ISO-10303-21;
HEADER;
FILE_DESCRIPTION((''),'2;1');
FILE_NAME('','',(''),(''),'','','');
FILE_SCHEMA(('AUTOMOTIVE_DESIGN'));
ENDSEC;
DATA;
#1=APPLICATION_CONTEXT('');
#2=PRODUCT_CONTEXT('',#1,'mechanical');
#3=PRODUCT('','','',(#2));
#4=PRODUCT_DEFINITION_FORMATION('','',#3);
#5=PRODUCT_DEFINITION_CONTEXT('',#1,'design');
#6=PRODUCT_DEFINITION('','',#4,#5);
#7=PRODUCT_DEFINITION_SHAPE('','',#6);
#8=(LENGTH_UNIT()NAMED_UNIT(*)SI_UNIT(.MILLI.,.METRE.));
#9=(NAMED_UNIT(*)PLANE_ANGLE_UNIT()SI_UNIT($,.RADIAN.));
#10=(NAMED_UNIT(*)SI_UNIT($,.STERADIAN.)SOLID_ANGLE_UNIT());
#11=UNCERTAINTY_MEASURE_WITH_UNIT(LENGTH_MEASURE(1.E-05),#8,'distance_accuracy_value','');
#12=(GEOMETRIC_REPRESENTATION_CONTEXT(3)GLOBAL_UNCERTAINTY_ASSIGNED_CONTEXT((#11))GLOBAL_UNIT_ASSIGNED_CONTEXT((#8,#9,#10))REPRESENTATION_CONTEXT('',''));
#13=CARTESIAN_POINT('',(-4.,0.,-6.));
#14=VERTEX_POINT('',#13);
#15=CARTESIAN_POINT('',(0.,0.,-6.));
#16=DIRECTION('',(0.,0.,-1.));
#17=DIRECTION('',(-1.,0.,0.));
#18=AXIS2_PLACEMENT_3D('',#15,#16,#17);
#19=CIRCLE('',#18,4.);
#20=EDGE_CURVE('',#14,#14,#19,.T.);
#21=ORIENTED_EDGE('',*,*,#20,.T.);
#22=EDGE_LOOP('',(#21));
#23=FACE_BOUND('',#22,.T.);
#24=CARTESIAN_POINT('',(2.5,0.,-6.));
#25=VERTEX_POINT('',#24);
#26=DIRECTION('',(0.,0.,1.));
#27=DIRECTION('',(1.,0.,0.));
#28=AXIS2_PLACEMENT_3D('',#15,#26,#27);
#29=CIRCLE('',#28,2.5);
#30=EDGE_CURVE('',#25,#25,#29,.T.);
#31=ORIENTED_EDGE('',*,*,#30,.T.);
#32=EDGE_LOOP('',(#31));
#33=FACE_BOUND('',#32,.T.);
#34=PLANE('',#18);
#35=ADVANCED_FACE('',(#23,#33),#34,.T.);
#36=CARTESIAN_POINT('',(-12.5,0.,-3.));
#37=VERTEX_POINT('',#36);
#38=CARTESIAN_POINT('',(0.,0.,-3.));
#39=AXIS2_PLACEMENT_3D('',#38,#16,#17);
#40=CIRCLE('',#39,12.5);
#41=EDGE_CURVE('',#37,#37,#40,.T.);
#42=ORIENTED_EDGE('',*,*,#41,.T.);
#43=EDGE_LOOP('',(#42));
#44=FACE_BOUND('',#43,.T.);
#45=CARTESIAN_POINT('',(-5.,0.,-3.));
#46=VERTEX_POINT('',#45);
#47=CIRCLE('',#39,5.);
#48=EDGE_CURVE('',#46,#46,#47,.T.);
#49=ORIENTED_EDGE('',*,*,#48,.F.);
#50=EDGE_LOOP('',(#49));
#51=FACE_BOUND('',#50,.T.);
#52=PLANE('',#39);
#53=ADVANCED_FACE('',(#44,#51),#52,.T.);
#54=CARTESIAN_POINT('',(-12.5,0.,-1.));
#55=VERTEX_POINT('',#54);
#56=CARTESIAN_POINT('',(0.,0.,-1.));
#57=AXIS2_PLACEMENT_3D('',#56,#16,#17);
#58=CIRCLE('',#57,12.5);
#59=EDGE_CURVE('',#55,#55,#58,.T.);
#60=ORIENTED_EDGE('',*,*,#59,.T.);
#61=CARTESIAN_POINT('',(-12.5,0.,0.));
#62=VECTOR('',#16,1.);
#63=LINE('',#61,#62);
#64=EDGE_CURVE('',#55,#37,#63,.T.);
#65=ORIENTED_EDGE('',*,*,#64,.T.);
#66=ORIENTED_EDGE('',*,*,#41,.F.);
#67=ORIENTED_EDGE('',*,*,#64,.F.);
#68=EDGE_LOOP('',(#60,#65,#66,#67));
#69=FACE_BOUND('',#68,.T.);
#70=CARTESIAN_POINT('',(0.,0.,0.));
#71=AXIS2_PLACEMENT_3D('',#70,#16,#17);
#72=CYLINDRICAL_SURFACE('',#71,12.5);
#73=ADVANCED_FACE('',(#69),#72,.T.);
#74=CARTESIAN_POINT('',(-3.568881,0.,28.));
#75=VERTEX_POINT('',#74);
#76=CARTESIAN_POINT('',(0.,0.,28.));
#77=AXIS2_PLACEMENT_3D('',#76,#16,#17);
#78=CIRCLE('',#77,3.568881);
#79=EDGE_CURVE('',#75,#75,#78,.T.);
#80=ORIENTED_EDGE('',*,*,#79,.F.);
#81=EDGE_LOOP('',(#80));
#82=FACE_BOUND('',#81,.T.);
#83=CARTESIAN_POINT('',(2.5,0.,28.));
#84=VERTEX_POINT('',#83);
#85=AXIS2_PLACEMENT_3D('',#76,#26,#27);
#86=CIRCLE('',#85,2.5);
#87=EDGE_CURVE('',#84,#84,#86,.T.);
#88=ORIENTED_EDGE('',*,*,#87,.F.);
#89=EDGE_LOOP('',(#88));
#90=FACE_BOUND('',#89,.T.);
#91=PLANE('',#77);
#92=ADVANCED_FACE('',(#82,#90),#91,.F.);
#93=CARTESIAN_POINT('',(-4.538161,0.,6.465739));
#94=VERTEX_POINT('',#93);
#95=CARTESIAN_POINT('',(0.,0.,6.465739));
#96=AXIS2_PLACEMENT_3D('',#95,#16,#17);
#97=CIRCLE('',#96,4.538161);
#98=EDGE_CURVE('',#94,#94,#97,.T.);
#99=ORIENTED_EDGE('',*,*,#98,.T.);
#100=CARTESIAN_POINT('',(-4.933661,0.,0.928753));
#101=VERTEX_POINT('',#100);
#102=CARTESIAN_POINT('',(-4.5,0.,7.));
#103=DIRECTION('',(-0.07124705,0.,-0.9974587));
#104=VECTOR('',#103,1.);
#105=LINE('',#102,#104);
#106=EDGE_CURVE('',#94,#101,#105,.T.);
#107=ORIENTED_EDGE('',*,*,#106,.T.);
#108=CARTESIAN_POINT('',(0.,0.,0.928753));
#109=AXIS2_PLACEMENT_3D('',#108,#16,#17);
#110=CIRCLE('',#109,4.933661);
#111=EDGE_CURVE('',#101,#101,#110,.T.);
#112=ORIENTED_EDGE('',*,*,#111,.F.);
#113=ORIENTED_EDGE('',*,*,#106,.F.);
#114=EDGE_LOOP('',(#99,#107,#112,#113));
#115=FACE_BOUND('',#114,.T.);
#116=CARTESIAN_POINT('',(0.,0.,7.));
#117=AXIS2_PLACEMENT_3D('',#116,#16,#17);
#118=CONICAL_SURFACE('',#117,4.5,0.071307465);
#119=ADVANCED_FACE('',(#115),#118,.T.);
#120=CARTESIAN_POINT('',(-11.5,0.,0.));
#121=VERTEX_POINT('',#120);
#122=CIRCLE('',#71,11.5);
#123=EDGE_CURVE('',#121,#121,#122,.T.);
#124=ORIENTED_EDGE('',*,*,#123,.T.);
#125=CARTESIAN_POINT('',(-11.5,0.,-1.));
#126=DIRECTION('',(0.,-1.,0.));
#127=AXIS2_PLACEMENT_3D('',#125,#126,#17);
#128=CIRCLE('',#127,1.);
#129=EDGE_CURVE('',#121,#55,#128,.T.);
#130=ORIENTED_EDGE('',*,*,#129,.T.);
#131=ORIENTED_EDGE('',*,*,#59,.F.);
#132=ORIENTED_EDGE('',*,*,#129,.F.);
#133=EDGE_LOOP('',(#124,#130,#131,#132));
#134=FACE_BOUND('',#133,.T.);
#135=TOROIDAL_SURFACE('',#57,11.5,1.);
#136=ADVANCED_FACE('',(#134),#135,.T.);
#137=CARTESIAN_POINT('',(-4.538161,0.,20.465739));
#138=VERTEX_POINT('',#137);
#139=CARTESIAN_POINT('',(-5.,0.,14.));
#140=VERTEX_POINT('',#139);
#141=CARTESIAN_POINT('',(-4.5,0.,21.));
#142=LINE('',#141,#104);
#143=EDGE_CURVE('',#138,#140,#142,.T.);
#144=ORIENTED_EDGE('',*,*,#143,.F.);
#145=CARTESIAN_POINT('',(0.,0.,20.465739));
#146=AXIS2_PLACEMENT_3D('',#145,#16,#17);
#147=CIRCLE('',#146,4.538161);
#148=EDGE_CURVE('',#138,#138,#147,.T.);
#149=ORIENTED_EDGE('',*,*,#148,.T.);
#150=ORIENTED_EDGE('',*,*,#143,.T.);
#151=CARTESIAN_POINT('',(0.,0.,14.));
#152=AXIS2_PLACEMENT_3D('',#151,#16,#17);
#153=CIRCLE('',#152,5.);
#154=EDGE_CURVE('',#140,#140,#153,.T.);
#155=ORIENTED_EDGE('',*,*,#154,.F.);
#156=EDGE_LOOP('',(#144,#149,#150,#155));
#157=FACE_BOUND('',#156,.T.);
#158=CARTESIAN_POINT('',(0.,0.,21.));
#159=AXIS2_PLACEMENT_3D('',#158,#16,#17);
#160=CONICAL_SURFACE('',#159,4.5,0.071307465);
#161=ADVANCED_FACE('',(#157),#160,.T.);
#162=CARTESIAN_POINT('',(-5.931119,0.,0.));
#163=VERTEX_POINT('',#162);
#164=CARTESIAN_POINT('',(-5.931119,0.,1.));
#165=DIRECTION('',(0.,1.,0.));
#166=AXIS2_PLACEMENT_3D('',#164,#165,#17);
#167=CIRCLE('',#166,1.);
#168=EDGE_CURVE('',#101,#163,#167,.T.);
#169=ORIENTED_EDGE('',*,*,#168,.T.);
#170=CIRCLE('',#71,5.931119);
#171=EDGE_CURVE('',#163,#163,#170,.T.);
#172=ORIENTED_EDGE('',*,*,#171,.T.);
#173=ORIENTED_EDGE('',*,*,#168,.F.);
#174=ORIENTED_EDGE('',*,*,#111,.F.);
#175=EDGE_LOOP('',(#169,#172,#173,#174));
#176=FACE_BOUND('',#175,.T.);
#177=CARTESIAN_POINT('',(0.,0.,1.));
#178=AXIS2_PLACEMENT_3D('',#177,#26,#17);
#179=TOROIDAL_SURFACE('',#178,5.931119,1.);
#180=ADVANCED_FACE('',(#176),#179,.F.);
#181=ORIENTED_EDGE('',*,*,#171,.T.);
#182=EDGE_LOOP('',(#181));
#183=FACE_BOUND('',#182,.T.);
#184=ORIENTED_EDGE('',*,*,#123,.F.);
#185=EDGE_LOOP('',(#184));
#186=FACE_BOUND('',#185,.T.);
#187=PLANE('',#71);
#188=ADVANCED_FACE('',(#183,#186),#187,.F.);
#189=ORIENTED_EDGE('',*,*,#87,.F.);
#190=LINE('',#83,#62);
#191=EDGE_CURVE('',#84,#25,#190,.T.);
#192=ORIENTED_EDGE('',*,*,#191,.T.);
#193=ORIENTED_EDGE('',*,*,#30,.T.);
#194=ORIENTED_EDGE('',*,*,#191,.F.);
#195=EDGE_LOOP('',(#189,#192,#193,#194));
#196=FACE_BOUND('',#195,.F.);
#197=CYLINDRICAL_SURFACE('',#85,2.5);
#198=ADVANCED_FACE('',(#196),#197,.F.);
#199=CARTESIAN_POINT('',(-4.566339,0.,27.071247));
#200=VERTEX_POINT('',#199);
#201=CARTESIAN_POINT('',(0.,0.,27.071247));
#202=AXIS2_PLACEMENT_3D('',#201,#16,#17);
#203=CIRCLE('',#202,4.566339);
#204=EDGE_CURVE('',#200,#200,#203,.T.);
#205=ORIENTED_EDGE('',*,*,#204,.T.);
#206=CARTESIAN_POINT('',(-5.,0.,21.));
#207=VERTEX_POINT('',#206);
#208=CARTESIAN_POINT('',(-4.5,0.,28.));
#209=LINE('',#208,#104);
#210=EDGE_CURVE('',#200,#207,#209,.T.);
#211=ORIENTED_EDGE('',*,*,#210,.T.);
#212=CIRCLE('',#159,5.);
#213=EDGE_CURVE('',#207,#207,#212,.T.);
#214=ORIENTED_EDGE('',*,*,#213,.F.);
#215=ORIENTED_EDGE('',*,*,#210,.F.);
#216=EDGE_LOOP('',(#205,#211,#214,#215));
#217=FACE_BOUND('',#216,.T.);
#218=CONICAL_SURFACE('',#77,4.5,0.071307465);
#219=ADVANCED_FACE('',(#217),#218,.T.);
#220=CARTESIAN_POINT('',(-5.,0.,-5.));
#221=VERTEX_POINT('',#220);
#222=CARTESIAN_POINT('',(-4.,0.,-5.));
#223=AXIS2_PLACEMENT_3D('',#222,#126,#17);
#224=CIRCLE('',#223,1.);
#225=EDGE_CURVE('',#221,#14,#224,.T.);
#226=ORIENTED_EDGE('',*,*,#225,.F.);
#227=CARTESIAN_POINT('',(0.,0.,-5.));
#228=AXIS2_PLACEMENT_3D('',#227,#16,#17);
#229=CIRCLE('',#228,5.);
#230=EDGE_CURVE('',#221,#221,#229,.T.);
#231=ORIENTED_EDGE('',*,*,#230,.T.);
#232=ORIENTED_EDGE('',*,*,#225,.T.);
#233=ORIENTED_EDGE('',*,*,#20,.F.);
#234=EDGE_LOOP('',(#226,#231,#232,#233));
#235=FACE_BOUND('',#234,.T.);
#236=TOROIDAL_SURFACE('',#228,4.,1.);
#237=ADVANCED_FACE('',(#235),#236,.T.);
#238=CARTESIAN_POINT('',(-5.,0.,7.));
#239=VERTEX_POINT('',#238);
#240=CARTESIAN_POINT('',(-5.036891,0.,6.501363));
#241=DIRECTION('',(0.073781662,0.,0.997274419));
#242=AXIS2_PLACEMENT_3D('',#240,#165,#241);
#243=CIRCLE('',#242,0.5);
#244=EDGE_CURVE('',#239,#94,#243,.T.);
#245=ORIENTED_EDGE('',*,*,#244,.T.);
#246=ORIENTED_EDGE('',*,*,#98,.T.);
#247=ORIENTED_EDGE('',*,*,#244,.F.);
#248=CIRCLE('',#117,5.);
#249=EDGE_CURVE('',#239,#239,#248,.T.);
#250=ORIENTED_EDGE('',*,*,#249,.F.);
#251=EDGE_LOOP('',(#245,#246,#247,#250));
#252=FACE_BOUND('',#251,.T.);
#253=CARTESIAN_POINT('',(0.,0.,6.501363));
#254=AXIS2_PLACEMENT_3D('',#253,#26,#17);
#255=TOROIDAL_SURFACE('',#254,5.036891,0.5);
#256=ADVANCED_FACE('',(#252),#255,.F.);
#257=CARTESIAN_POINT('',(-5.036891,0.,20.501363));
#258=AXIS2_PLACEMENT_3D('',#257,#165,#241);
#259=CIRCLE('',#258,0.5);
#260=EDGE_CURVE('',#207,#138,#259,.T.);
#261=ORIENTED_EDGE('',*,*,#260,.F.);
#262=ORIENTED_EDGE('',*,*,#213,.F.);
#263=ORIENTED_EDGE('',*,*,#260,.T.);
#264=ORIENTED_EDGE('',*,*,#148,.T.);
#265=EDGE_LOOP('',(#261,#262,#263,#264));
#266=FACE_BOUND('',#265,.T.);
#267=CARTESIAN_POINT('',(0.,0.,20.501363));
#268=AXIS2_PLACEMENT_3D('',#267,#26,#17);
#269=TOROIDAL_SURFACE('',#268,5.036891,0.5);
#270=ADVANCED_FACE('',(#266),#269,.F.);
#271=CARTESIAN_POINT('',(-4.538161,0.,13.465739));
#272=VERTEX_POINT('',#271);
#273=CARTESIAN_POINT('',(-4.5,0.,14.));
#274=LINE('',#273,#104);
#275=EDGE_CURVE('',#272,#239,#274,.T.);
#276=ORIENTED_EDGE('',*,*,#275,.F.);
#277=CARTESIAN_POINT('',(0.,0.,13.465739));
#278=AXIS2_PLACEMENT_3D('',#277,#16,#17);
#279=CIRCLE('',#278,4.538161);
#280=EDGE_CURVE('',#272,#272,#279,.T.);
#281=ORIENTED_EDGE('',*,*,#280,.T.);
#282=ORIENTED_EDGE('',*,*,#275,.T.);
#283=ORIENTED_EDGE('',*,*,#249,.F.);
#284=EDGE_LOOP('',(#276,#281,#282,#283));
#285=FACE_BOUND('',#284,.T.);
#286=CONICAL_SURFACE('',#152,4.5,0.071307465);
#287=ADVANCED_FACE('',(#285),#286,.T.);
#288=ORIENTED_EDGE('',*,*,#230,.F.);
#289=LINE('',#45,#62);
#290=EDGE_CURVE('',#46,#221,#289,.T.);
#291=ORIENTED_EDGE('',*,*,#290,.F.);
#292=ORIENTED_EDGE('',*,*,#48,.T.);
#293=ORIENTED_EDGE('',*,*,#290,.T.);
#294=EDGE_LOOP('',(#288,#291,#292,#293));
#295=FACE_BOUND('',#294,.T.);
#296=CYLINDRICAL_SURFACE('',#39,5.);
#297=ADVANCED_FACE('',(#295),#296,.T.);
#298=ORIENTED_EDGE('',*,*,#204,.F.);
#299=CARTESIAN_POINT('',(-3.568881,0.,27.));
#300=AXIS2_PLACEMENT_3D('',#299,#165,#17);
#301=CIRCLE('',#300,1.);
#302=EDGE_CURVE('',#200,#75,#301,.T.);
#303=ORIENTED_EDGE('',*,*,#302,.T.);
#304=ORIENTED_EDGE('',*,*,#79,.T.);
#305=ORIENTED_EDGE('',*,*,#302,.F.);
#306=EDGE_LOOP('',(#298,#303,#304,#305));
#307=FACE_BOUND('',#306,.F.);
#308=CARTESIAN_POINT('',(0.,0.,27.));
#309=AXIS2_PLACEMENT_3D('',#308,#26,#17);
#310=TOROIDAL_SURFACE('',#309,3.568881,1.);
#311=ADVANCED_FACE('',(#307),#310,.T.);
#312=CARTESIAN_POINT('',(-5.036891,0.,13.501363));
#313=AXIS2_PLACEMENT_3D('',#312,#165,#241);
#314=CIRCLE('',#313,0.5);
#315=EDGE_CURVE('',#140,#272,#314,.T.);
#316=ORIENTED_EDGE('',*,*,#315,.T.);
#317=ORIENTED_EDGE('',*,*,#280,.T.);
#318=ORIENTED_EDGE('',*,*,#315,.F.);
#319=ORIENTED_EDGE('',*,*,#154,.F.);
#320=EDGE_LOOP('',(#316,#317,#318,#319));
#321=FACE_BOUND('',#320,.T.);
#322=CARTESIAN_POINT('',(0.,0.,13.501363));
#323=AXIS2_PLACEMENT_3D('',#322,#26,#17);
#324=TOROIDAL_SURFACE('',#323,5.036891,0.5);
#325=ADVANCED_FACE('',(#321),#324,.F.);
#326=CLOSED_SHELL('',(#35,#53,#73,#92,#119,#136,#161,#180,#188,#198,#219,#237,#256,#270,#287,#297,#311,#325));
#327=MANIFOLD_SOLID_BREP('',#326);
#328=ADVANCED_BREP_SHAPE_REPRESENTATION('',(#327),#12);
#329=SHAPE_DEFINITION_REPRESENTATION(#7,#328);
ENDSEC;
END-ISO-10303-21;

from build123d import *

# Parameters (mm, degrees)
F2_R     = 2.5
F3_DEPTH = 34
F5_R     = 1


# Not quite as in the source:
# - a fillet or chamfer that OpenCascade refuses, or shapes differently, is made with other operations: its cross-section is extruded or revolved along the edge and cut away or added


with BuildPart() as f1:
    # F0 (on Front) → F1 (revolve)
    with BuildSketch(Plane.XZ):
        Polygon((0, 28), (-4.5, 28), (-5, 21), (-4.5, 21), (-5, 14), (-4.5, 14), (-5, 7), (-4.5, 7), (-5, 0), (-12.5, 0), (-12.5, -3), (-5, -3), (-5, -6), (0, -6), align=None)
    revolve(axis=Axis((0, 0, 11), (0, 0, -1)))

    # F2 (on face) → F3 (cut, through all)
    with BuildSketch(Plane.XY.offset(28)):
        Circle(F2_R)
    extrude(amount=-F3_DEPTH, mode=Mode.SUBTRACT)

    # F4: fillet of radius 0.5 on 3 edges, made by hand

    # F4_s1 → F4_t2 (revolve)
    with BuildSketch(Plane.XZ):
        with BuildLine():
            ThreePointArc((-5, 21), (-4.6586305005, 20.8283476869), (-4.538161481, 20.4657392656))
            Line((-4.538161481, 20.4657392656), (-4.528186894, 20.4650267951))
            Line((-4.528186894, 20.4650267951), (-4.490025413, 20.9992875295))
            Line((-4.490025413, 20.9992875295), (-4.5, 21.01))
            ThreePointArc((-4.5, 21.01), (-4.75, 21.01), (-4.9992621834, 21.0099727442))
            Line((-4.9992621834, 21.0099727442), (-5, 21))
        make_face()
    revolve(axis=Axis((0, 0, 21), (0, 0, -1)))

    # F4_s3 → F4_t4 (revolve)
    with BuildSketch(Plane.XZ):
        with BuildLine():
            ThreePointArc((-5, 14), (-4.6586305005, 13.8283476869), (-4.538161481, 13.4657392656))
            Line((-4.538161481, 13.4657392656), (-4.528186894, 13.4650267951))
            Line((-4.528186894, 13.4650267951), (-4.490025413, 13.9992875295))
            Line((-4.490025413, 13.9992875295), (-4.5, 14.01))
            ThreePointArc((-4.5, 14.01), (-4.75, 14.01), (-4.9992621834, 14.0099727442))
            Line((-4.9992621834, 14.0099727442), (-5, 14))
        make_face()
    revolve(axis=Axis((0, 0, 14), (0, 0, -1)))

    # F4_s5 → F4_t6 (revolve)
    with BuildSketch(Plane.XZ):
        with BuildLine():
            ThreePointArc((-5, 7), (-4.6586305005, 6.8283476869), (-4.538161481, 6.4657392656))
            Line((-4.538161481, 6.4657392656), (-4.528186894, 6.4650267951))
            Line((-4.528186894, 6.4650267951), (-4.490025413, 6.9992875295))
            Line((-4.490025413, 6.9992875295), (-4.5, 7.01))
            ThreePointArc((-4.5, 7.01), (-4.75, 7.01), (-4.9992621834, 7.0099727442))
            Line((-4.9992621834, 7.0099727442), (-5, 7))
        make_face()
    revolve(axis=Axis((0, 0, 7), (0, 0, -1)))

    # F5
    f5_edges = [f1.edges().sort_by_distance(p)[0] for p in [
        (4.5, 0, 28),
        (5, 0, 0),
        (5, 0, -6),
        (12.5, 0, 0),
    ]]
    fillet(f5_edges, radius=F5_R)


solid = f1.part
